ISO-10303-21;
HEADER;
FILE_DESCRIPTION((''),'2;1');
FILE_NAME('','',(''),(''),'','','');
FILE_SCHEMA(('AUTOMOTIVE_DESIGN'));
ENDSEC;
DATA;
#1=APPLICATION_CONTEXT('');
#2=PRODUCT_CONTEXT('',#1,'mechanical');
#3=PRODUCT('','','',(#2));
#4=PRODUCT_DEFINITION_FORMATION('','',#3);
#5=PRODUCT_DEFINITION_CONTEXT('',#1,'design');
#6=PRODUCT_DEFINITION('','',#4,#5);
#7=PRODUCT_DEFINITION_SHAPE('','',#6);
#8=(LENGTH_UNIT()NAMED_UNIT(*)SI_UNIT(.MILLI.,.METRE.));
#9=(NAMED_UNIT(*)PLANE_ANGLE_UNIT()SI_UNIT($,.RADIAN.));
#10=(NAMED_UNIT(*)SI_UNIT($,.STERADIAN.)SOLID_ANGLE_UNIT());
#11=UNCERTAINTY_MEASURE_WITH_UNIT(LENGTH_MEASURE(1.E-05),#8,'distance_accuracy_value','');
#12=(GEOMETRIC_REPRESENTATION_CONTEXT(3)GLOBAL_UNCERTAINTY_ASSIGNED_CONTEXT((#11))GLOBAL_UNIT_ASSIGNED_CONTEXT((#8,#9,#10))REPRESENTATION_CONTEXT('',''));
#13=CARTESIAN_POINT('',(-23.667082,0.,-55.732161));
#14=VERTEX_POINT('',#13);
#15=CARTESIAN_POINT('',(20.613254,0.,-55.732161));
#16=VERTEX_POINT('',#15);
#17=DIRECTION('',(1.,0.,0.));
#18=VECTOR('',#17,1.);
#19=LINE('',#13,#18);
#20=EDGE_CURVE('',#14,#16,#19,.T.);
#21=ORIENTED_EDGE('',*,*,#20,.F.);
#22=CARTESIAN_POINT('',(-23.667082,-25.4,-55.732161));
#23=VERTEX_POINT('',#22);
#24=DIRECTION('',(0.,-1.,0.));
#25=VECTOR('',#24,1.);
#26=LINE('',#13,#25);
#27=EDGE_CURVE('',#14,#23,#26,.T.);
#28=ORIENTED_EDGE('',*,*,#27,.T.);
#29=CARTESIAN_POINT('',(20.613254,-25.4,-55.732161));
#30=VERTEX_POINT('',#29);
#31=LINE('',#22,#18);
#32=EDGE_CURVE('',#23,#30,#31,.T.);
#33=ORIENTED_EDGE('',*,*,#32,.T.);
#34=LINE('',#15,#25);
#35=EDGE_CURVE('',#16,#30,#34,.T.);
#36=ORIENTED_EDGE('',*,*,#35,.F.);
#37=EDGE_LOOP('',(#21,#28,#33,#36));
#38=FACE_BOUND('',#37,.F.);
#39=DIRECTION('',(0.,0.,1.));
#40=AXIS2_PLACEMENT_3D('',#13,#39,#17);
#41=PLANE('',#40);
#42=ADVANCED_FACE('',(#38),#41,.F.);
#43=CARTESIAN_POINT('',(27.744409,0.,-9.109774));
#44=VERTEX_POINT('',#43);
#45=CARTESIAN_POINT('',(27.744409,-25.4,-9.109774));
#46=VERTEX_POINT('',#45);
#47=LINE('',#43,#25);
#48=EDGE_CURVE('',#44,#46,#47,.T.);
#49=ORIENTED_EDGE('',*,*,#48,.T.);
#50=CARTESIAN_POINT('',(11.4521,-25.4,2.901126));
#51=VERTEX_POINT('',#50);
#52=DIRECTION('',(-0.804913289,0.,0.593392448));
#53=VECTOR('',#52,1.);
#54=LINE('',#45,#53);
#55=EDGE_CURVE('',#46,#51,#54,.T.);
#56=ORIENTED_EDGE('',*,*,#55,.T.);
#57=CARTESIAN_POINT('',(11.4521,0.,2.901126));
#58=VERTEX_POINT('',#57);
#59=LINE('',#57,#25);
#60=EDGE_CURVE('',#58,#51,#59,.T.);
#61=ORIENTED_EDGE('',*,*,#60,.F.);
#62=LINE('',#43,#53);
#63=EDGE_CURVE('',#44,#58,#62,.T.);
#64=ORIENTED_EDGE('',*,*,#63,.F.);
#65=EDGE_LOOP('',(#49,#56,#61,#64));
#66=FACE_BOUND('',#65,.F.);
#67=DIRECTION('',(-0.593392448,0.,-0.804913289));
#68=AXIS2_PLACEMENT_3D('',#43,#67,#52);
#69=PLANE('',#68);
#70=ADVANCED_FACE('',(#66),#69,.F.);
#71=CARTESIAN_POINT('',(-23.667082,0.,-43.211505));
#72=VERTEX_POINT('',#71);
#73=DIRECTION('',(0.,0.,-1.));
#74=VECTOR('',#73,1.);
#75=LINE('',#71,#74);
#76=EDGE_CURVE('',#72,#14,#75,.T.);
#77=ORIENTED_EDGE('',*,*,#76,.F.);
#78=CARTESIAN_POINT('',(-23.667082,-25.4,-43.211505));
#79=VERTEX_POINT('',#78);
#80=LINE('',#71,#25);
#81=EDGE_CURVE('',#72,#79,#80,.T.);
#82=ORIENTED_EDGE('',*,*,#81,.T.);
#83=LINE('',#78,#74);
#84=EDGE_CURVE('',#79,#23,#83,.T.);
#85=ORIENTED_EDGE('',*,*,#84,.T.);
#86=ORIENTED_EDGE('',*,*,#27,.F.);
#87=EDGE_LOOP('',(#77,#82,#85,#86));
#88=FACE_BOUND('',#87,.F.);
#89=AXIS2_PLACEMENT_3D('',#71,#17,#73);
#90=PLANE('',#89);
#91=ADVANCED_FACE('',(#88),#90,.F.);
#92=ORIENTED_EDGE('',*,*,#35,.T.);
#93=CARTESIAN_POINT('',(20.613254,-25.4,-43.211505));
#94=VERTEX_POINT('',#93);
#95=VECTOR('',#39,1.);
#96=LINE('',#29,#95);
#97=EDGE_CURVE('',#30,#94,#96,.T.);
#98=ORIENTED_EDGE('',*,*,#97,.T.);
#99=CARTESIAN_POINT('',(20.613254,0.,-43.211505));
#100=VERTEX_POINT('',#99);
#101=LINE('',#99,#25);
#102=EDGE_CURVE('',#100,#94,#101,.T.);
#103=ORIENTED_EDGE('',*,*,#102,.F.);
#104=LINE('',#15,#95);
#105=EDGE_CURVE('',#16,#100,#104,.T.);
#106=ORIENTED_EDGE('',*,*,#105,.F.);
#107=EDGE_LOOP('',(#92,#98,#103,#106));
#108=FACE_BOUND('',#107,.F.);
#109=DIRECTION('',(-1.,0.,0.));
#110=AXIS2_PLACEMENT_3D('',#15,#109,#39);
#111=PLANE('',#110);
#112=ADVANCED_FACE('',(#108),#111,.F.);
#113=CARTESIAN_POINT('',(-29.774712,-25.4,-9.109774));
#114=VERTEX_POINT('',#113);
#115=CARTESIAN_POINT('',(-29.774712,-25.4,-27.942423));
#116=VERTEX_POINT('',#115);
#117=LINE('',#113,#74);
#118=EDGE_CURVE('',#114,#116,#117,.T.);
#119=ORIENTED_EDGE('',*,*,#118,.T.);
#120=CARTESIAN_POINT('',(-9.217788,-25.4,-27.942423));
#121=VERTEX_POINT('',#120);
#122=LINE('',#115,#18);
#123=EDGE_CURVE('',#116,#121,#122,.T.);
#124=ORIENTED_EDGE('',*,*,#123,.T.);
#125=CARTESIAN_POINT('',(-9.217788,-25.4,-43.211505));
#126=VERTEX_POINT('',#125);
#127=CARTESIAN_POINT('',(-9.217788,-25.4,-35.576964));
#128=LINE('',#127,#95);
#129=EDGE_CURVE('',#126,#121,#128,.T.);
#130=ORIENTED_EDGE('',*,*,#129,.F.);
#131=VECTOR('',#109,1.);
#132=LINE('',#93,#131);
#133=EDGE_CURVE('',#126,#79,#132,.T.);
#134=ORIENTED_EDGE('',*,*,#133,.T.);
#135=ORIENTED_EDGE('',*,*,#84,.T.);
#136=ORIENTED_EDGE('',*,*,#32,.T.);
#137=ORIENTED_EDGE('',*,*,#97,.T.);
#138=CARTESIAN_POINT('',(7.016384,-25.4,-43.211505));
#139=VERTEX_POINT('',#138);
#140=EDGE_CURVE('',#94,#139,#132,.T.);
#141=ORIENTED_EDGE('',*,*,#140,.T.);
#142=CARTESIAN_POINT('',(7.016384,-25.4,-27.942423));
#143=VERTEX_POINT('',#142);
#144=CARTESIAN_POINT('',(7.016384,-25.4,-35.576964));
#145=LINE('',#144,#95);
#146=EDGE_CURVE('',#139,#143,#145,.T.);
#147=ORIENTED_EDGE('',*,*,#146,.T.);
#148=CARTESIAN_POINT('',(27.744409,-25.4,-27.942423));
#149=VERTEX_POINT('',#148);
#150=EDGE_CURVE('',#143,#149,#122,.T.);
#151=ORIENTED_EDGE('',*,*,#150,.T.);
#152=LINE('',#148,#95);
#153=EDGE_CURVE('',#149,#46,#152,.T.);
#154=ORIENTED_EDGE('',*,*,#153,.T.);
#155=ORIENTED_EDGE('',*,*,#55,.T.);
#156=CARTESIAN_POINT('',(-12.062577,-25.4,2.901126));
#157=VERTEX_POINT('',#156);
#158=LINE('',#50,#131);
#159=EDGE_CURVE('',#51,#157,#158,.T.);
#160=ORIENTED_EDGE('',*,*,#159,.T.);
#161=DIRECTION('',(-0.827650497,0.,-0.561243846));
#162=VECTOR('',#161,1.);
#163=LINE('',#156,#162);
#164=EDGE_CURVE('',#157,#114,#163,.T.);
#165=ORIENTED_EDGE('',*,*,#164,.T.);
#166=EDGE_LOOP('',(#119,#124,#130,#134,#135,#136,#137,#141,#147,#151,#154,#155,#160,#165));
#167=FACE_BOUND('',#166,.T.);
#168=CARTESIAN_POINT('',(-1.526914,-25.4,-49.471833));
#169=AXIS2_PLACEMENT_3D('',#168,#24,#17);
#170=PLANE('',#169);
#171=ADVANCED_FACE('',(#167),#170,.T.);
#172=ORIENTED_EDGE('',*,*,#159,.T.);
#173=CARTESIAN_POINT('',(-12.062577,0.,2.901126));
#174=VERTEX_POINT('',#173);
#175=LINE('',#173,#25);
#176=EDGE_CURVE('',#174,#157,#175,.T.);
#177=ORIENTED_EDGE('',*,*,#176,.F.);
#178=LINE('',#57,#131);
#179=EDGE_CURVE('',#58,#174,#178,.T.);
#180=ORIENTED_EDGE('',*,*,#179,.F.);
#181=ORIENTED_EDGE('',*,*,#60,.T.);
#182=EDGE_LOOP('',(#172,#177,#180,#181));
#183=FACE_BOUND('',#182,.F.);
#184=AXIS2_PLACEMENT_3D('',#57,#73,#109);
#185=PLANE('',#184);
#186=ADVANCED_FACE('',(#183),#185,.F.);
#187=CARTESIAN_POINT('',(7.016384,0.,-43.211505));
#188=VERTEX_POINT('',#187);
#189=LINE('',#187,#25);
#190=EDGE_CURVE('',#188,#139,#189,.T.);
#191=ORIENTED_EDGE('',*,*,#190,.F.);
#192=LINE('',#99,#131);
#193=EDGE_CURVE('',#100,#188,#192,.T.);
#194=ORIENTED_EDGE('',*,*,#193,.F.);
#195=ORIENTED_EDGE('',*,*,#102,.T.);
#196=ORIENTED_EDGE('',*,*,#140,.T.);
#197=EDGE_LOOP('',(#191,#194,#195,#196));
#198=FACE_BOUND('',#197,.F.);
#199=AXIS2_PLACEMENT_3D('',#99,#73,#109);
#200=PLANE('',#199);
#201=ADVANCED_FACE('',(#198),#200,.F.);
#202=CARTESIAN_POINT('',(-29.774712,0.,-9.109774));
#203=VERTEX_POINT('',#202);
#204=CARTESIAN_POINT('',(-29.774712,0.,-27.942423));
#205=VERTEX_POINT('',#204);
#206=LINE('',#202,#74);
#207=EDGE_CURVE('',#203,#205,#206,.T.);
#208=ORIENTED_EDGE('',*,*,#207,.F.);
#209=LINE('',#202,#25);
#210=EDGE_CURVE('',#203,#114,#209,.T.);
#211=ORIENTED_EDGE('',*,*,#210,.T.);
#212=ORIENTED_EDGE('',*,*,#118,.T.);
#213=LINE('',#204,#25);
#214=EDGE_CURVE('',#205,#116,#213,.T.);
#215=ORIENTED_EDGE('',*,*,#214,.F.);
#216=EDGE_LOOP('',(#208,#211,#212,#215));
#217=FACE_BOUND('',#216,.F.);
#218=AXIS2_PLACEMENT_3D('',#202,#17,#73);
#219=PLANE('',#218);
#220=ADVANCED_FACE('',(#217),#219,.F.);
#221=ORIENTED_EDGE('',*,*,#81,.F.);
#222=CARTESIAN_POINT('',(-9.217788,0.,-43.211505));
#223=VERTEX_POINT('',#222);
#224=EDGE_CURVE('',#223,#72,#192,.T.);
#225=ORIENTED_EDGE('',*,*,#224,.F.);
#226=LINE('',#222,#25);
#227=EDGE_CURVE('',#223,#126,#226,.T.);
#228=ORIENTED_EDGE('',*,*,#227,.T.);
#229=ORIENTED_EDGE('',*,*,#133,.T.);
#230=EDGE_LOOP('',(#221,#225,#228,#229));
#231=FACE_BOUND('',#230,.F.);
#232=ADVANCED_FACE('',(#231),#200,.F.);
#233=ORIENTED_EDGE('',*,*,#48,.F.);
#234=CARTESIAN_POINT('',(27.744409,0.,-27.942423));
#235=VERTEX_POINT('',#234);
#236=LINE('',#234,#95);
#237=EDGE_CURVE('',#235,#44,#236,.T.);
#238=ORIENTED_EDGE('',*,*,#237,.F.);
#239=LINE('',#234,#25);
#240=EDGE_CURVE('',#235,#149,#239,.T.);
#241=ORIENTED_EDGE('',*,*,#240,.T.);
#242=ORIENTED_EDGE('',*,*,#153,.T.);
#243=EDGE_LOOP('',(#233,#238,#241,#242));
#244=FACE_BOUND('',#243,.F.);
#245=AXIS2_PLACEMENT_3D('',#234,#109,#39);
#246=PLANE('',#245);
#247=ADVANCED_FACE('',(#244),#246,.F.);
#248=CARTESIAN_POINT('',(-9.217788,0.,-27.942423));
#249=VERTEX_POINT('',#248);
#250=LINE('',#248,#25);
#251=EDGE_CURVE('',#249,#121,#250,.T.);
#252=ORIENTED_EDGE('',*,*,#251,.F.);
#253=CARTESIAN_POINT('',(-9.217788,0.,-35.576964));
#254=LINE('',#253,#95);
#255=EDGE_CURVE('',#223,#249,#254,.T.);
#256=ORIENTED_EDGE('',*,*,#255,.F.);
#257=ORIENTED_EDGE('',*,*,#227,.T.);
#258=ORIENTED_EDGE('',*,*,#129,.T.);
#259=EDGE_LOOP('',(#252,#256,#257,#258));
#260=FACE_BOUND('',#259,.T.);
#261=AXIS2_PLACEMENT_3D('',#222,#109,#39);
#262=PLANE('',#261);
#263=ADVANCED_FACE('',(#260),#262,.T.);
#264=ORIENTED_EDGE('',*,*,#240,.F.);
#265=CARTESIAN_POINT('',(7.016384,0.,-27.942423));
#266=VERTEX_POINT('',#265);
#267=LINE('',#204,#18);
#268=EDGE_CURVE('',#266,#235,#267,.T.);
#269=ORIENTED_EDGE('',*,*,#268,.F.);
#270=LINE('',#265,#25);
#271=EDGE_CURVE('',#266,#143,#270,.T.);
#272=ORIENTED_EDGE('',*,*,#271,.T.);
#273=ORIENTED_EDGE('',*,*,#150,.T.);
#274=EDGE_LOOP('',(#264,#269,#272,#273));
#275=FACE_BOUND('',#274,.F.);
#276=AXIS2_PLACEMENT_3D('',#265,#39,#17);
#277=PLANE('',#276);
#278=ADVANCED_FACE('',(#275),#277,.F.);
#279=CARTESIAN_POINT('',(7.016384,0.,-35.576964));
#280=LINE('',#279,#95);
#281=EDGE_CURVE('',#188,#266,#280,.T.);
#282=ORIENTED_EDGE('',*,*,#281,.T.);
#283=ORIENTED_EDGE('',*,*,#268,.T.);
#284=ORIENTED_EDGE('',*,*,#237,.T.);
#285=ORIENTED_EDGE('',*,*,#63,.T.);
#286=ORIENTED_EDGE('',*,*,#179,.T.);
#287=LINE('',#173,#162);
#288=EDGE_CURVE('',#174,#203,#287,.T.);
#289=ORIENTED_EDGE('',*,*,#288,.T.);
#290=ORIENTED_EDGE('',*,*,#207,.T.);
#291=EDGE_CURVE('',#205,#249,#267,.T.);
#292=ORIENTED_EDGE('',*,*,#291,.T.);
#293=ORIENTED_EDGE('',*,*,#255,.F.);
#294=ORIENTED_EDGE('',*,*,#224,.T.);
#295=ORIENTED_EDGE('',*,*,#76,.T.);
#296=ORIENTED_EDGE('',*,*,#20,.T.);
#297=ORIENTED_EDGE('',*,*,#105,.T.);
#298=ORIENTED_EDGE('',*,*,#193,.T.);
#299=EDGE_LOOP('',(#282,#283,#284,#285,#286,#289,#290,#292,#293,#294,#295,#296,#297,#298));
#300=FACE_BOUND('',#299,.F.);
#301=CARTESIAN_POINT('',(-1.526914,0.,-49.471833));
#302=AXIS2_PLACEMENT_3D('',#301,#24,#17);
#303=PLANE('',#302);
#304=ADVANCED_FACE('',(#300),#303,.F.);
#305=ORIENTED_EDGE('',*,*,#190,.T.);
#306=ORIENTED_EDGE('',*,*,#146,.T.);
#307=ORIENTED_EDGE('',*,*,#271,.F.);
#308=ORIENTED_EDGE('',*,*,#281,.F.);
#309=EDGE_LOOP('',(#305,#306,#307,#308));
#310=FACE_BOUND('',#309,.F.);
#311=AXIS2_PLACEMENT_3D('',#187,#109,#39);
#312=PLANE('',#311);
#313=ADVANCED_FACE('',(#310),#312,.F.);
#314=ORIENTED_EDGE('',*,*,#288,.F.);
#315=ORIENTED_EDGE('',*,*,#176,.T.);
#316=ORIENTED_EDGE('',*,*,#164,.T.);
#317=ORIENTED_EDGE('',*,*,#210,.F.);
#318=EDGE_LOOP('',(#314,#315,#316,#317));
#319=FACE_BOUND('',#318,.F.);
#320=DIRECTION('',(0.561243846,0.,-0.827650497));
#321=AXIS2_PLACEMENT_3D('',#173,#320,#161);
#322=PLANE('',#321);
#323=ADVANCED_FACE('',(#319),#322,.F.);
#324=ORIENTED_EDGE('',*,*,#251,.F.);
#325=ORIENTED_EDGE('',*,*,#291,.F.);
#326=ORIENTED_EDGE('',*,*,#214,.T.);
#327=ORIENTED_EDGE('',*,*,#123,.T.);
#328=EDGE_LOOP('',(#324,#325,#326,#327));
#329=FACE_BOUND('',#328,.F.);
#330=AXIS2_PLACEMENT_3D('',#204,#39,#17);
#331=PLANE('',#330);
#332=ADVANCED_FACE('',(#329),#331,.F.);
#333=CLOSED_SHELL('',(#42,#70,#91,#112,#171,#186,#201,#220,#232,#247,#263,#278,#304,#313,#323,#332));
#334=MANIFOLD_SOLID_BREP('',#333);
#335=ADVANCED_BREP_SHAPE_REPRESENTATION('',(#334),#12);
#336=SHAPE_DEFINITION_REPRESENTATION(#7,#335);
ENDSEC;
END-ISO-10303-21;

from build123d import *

# Parameters (mm, degrees)
F0_W     = 16.2341720425
F0_H     = 15.2690820396
F1_DEPTH = 25.4
F2_DEPTH = 25.4


# Not quite as in the source:
# - a feature names something its author has since deleted; it is built from what else it names


with BuildPart() as f1:
    # F0 (on Front) → F1 (new body)
    with BuildSketch(Plane.XZ):
        Polygon((-9.2177884653, -27.9424227774), (7.0163835771, -27.9424227774), (27.7444086969, -27.9424227774), (27.7444086969, -9.1097736731), (11.4521000938, 2.9011261649), (-12.0625765994, 2.9011261649), (-29.7747123986, -9.1097736731), (-29.7747123986, -27.9424227774), align=None)
        with Locations((-1.1007024441, -35.5769637972)):
            Rectangle(F0_W, F0_H)
    extrude(amount=F1_DEPTH)

    # F0 (on Front) → F2 (join)
    with BuildSketch(Plane.XZ):
        Polygon((-23.6670821905, -55.7321608067), (20.6132540479, -55.7321608067), (20.6132540479, -43.211504817), (7.0163835771, -43.211504817), (-9.2177884653, -43.211504817), (-23.6670821905, -43.211504817), align=None)
    extrude(amount=F2_DEPTH)


solid = f1.part
